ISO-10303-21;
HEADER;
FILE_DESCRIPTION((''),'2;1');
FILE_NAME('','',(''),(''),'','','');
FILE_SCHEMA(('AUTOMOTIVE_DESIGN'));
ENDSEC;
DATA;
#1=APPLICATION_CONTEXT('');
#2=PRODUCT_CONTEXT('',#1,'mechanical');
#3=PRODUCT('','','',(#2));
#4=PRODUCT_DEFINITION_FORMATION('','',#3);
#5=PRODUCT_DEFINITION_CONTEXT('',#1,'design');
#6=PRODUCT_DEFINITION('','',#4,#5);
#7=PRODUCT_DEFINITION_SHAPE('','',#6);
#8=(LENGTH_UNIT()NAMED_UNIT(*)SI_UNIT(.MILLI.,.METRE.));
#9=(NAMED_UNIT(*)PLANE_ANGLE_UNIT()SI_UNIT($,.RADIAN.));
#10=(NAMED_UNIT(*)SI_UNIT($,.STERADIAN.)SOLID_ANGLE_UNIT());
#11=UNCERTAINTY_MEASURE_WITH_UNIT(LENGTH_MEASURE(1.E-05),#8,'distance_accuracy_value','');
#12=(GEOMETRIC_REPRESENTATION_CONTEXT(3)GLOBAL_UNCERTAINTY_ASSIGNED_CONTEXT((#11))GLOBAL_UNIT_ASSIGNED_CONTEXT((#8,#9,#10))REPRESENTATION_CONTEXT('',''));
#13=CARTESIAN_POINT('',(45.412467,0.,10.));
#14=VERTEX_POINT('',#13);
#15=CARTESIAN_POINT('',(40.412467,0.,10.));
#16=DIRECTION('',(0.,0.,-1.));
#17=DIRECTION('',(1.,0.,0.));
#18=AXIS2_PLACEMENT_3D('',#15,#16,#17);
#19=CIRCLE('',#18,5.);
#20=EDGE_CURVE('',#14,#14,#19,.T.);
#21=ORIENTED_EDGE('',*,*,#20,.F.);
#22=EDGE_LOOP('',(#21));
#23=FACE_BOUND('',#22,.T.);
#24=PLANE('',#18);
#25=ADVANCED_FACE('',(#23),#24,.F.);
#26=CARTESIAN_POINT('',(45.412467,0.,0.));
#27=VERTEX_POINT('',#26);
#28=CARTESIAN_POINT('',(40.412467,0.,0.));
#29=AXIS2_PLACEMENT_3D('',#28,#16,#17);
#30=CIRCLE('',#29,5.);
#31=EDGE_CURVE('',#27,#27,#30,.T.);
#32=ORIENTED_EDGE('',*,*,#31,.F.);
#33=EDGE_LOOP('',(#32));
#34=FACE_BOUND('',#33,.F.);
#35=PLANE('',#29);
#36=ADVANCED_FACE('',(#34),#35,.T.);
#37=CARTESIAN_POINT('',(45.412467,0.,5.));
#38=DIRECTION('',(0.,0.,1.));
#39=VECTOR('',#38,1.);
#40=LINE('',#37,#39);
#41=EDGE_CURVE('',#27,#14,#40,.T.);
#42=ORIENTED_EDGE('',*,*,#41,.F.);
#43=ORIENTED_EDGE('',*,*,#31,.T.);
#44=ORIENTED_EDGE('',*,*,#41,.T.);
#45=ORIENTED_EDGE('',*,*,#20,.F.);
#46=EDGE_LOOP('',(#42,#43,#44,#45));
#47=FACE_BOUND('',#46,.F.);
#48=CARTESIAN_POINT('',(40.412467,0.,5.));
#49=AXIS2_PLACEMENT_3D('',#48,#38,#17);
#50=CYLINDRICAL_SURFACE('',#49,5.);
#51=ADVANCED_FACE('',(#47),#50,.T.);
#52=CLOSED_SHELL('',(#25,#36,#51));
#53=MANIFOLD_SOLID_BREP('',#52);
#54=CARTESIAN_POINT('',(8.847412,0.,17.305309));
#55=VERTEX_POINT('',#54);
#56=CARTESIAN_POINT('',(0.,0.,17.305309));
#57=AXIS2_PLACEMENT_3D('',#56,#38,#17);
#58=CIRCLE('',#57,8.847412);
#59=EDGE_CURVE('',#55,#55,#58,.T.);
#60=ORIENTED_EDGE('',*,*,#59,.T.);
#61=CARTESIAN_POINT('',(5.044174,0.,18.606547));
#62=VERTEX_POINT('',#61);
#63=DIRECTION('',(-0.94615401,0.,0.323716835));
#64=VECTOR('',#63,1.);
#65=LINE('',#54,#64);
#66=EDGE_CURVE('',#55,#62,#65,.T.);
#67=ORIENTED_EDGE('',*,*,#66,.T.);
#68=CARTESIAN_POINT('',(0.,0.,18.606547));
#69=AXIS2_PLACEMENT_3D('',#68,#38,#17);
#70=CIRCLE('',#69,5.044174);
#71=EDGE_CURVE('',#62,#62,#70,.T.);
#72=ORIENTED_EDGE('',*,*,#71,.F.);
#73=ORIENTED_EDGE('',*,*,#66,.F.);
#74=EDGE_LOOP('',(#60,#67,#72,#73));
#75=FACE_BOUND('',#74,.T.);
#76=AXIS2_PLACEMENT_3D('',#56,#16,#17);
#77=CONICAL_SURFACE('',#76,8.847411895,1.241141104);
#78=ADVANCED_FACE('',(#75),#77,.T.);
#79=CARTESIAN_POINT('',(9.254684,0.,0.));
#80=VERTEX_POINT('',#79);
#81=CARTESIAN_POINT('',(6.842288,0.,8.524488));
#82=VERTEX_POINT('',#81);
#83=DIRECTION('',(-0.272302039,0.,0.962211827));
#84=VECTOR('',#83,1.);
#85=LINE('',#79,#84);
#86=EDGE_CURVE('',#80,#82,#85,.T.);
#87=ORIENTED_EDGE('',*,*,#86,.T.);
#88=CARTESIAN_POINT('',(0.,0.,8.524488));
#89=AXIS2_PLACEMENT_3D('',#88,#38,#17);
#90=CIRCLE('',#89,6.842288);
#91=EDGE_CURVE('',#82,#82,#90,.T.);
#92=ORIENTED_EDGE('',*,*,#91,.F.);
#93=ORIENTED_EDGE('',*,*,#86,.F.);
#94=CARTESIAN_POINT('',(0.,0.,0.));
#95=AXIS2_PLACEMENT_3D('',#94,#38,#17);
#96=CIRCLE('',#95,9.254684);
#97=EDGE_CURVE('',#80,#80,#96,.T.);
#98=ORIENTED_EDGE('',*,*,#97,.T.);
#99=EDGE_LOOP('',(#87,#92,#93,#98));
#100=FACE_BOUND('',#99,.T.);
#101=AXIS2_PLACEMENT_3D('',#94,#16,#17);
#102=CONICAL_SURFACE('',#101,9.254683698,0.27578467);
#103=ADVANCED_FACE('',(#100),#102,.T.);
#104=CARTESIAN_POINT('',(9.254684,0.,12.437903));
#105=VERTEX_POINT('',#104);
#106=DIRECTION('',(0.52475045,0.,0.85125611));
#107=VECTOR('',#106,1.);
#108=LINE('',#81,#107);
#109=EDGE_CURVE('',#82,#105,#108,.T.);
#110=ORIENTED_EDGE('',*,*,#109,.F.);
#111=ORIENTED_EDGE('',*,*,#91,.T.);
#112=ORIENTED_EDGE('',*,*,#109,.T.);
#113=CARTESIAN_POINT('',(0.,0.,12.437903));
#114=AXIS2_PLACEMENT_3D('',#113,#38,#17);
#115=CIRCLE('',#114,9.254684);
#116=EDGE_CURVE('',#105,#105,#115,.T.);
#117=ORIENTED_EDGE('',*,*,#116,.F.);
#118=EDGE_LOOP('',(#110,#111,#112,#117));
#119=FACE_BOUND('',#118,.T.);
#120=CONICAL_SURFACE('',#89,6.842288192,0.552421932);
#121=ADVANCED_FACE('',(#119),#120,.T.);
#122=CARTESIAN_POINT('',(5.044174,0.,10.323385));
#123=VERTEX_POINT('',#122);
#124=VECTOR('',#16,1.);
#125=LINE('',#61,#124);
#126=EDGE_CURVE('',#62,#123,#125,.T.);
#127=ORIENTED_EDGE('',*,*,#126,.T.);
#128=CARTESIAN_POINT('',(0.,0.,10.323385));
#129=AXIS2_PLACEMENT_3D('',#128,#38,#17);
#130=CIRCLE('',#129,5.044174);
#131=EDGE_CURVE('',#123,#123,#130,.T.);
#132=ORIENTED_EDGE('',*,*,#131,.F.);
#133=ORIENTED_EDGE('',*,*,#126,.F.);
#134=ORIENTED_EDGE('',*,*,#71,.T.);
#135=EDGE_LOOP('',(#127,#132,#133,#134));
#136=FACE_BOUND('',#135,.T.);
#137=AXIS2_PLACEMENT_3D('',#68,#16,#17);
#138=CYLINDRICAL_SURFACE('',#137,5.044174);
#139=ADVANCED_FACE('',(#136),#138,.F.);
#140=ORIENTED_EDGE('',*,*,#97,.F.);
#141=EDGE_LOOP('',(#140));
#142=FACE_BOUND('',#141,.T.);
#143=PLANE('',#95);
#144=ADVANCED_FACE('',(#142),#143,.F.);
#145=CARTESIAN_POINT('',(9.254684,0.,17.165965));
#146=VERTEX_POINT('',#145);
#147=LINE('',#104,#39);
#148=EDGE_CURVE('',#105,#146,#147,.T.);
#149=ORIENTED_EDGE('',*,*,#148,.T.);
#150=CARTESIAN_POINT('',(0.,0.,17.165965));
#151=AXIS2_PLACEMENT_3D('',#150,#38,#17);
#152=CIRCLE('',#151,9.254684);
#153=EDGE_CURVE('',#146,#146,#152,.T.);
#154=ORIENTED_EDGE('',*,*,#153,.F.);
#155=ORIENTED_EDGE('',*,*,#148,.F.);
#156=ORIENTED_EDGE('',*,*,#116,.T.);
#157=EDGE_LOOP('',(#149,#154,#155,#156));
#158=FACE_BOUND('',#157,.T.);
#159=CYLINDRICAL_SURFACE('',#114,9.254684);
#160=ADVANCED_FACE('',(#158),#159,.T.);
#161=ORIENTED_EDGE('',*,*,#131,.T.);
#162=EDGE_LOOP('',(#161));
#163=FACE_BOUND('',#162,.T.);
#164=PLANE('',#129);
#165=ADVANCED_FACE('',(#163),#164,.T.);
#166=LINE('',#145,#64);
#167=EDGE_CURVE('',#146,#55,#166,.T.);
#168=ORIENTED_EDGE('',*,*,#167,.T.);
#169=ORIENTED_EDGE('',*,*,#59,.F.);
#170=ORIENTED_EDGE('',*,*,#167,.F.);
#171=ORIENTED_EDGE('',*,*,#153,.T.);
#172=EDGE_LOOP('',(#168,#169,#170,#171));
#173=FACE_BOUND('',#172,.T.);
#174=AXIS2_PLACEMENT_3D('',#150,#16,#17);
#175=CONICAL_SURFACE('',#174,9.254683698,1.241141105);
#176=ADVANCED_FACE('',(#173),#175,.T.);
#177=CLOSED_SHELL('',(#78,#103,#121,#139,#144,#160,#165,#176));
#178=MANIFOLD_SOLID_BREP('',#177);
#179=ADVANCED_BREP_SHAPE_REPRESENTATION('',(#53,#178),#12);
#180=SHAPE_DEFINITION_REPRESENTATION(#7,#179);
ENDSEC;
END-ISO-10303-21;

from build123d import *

# Parameters (mm, degrees)
F0_W = 5
F0_H = 10


# Not quite as in the source:
# - a feature names something its author has since deleted; it is built from what else it names


with BuildPart() as f1:
    # F0 (on Front) → F1 (revolve)
    with BuildSketch(Plane.XZ):
        Polygon((0, 10.3233849324), (0, 0), (9.254683698, 0), (6.8422881923, 8.5244880731), (9.254683698, 12.4379033223), (9.254683698, 14.0870045941), (9.254683698, 17.1659647299), (8.8474118947, 17.3053085763), (5.0441742836, 18.6065470946), (5.0441742836, 11.2733849324), (5.0441742836, 10.3233849324), align=None)
    revolve(axis=Axis((0, 0, 10.1661796476), (0, 0, 1)))


with BuildPart() as f2:
    # F0 (on Front) → F2 (revolve)
    with BuildSketch(Plane.XZ):
        with Locations((42.9124666942, 5)):
            Rectangle(F0_W, F0_H)
    revolve(axis=Axis((40.4124666942, 0, 5), (0, 0, -1)))


solid = Compound([f1.part, f2.part])
